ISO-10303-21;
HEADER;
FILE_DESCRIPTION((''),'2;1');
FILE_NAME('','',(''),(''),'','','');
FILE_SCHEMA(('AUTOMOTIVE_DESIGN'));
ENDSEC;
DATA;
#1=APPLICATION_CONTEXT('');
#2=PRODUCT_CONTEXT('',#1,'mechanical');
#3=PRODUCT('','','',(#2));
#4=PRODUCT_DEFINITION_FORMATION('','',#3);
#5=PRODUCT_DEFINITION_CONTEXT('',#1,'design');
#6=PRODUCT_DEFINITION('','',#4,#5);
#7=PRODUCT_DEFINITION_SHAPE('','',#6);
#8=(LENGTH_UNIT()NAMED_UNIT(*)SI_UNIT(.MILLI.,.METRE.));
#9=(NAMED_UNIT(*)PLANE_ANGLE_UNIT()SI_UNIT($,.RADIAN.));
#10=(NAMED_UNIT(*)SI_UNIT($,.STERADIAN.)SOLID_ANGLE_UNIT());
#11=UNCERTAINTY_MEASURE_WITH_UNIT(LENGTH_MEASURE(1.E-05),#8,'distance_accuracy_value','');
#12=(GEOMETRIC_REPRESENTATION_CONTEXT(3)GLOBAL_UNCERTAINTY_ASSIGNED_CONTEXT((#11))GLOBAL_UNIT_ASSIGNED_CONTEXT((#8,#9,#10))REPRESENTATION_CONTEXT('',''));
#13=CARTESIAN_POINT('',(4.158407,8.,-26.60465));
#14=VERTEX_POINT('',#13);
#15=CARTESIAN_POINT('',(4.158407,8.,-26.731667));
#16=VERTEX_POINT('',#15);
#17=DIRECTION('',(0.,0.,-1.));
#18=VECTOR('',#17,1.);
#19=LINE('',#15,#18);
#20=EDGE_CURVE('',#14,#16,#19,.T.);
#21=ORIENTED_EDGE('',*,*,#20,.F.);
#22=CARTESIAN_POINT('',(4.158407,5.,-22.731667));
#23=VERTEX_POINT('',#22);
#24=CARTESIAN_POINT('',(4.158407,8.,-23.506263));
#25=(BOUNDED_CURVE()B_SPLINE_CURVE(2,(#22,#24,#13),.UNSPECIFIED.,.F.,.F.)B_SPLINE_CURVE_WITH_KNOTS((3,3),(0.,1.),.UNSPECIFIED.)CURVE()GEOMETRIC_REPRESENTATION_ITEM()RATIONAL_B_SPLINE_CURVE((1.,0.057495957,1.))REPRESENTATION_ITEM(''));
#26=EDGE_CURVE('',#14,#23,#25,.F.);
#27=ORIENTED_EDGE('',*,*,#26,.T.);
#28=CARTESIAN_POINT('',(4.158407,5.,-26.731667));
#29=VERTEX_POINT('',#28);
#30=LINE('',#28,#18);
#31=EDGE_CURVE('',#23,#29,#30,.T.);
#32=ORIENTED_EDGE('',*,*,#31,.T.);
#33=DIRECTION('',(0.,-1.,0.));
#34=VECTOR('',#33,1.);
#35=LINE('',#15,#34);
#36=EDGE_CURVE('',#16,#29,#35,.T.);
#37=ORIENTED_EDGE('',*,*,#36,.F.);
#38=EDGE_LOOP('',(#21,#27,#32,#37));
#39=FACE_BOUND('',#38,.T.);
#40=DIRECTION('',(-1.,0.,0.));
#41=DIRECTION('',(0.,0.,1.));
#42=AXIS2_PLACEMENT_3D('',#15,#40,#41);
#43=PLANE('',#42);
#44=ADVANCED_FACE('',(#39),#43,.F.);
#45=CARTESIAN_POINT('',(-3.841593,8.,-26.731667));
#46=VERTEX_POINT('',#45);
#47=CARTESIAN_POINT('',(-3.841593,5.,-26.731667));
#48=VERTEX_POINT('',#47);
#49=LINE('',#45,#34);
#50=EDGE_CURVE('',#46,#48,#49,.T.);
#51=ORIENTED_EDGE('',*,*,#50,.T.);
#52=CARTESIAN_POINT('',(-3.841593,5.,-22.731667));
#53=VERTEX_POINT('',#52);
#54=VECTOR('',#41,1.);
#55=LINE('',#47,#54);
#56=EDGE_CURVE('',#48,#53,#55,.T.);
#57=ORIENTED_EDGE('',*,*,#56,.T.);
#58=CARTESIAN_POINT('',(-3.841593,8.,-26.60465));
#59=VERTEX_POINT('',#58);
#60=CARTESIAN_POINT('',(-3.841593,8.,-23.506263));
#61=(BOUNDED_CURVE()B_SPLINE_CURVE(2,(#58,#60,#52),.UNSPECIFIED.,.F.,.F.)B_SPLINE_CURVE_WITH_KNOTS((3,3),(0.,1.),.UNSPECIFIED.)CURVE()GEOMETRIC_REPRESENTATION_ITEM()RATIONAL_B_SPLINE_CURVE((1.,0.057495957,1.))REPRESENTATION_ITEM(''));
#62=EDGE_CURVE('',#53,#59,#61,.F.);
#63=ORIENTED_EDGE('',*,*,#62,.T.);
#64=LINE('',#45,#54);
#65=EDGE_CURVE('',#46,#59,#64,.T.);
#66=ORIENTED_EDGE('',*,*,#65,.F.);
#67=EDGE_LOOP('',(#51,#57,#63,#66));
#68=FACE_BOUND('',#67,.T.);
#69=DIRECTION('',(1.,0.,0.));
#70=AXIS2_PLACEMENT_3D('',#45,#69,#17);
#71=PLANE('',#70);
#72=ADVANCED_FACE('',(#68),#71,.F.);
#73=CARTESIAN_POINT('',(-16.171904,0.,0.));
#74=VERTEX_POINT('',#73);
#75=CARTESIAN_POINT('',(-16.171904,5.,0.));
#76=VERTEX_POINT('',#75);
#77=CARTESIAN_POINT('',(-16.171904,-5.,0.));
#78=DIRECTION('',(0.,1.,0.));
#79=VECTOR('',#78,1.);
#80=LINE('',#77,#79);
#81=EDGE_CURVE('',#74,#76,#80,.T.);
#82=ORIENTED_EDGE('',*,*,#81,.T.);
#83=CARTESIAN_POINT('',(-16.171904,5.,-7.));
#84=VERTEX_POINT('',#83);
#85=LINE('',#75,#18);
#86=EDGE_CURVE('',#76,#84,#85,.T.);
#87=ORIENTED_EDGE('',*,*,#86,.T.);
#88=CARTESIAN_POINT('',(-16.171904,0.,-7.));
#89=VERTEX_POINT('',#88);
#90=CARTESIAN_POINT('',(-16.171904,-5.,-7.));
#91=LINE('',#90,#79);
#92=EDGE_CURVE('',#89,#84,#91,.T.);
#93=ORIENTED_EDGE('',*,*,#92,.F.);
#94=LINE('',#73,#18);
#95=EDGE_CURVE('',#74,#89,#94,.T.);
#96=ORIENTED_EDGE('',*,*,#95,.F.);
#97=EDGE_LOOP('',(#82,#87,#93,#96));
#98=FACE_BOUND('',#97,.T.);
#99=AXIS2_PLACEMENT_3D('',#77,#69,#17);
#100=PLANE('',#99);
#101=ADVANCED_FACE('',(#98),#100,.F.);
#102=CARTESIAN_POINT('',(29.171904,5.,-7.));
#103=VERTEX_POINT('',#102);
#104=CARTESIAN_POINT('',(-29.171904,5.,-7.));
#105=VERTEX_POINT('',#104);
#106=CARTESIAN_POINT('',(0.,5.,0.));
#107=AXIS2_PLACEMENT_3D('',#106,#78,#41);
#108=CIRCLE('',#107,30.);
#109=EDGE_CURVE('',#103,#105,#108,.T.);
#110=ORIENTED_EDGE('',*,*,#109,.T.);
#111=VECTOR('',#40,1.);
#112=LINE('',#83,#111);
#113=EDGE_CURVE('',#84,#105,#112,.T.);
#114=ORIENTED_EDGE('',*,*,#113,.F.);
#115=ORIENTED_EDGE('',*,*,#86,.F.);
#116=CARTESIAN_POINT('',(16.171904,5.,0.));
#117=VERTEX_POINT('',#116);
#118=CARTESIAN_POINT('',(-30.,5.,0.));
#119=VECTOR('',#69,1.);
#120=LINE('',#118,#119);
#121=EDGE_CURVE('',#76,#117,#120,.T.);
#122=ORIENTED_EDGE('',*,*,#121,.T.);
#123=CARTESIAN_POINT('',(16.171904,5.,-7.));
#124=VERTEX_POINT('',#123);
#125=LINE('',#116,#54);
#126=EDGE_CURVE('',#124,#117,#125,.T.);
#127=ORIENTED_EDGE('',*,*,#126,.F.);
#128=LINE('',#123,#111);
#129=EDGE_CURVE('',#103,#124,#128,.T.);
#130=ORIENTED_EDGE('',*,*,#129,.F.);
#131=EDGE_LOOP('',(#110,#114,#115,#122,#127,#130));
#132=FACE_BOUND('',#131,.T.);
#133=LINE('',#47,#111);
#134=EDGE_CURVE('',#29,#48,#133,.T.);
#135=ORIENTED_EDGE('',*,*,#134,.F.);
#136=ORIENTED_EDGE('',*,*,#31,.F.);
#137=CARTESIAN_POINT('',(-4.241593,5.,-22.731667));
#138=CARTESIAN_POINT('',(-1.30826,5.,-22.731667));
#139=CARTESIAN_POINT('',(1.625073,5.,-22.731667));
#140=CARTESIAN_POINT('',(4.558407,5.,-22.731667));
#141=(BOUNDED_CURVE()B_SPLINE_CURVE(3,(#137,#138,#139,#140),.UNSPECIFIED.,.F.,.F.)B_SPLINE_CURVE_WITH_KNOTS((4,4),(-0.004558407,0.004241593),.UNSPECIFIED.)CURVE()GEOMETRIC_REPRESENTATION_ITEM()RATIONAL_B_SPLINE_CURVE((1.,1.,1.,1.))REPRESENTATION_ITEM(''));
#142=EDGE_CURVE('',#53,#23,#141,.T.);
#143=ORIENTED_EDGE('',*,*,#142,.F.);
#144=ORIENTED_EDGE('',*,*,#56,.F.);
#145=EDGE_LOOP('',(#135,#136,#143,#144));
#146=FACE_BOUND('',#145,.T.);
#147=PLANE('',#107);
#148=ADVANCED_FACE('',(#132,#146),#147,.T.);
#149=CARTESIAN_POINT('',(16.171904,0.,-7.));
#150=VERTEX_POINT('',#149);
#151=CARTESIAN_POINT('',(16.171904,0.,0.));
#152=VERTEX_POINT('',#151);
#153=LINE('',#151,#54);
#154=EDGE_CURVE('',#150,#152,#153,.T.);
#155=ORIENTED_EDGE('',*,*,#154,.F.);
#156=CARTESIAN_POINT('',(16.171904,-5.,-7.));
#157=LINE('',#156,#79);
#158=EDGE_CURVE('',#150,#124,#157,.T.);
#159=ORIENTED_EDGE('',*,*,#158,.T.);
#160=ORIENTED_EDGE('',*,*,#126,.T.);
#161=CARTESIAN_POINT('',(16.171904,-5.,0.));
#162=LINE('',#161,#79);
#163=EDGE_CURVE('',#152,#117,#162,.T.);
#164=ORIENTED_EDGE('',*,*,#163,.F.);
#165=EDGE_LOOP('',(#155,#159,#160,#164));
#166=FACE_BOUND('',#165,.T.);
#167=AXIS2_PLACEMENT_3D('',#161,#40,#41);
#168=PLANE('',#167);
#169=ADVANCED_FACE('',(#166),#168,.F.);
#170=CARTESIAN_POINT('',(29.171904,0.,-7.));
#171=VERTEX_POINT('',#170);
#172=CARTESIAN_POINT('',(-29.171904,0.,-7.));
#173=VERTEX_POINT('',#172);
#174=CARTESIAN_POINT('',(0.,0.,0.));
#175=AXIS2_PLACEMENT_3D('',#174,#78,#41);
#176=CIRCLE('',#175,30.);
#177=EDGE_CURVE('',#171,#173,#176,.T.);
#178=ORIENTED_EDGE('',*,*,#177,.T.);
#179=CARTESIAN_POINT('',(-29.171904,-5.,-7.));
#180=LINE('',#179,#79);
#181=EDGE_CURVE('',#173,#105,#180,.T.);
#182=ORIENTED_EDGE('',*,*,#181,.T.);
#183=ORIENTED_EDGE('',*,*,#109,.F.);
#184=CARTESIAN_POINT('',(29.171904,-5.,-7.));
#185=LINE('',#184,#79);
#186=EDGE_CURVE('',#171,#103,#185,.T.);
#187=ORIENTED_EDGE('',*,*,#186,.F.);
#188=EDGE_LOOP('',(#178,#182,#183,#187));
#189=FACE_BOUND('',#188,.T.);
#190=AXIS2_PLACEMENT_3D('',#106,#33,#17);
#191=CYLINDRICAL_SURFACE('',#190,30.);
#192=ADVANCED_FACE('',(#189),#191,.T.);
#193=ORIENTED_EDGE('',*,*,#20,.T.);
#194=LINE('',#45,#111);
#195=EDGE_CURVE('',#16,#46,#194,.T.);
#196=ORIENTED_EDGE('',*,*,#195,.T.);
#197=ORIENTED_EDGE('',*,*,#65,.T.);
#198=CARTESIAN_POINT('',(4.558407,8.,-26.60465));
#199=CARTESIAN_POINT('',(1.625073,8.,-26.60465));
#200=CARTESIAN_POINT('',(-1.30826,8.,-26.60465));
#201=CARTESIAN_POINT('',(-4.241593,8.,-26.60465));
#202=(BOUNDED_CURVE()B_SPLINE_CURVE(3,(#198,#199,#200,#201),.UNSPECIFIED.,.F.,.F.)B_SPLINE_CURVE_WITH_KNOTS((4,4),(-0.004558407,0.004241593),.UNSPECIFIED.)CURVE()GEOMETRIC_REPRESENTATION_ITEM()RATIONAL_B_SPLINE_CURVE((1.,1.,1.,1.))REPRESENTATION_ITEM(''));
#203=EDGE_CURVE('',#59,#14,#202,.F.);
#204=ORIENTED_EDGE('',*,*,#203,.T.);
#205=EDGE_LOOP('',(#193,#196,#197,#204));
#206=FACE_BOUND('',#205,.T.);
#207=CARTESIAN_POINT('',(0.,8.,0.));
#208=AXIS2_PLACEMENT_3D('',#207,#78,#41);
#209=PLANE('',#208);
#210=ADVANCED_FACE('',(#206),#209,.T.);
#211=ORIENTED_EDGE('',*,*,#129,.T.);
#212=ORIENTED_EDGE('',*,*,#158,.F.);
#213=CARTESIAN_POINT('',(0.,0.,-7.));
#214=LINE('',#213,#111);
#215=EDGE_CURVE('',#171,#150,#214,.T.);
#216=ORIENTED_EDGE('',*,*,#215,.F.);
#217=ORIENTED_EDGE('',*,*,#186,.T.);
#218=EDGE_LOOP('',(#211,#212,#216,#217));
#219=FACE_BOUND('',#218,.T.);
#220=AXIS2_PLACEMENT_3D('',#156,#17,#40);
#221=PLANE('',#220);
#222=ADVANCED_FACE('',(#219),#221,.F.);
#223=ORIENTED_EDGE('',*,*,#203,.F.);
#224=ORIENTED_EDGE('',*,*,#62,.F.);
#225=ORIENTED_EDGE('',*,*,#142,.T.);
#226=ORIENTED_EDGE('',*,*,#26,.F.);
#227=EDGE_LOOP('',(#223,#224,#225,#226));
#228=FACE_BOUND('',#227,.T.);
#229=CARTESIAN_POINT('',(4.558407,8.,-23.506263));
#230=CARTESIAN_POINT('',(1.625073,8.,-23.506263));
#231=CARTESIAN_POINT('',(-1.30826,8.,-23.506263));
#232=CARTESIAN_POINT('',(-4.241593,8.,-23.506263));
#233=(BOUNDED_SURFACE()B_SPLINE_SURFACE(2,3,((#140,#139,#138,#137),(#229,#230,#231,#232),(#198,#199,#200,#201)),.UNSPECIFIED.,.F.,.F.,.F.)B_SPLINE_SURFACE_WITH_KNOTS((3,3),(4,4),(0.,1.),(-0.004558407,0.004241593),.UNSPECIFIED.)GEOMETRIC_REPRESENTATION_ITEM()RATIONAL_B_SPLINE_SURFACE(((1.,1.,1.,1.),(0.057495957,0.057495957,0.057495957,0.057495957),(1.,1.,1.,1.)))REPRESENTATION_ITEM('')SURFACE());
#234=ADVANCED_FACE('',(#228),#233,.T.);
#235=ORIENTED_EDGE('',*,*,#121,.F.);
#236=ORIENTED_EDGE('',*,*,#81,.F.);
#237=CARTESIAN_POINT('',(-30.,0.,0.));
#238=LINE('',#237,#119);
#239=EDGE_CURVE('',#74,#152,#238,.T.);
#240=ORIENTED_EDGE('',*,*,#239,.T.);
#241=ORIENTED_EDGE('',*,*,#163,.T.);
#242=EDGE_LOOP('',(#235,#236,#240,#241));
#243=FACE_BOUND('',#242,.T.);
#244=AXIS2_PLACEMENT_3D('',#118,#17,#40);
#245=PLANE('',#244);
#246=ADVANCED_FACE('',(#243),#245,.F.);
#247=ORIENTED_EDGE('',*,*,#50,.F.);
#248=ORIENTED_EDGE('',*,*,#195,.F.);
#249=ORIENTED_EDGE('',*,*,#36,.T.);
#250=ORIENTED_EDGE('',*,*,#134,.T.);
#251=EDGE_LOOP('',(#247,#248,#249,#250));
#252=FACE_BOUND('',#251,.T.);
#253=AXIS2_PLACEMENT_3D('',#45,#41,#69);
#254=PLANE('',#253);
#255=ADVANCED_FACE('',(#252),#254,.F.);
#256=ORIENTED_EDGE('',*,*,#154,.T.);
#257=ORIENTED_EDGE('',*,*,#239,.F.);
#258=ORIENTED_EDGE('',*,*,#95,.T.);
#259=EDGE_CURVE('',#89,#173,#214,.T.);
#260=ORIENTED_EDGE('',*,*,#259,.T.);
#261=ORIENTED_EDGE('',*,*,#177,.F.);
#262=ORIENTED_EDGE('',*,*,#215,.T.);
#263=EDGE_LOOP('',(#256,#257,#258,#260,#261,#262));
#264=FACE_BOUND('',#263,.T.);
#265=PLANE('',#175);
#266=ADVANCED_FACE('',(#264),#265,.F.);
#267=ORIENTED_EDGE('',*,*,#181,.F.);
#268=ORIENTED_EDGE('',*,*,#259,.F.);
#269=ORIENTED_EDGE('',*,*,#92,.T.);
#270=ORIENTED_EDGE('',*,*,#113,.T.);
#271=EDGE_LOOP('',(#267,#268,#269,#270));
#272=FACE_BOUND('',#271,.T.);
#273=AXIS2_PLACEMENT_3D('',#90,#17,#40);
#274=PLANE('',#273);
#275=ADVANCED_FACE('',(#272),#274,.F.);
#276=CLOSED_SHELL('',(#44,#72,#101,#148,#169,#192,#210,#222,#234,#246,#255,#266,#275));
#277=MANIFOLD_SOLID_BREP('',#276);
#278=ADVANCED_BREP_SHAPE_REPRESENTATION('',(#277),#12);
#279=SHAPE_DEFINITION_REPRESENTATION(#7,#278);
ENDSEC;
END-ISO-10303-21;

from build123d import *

# Parameters (mm, degrees)
BOSS_EXTRUDE1_DEPTH = 5
SKETCH3_W           = 8
SKETCH3_H           = 4
BOSS_EXTRUDE2_DEPTH = 3
FILLET1_START       = -3.841593316
FILLET1_DEPTH       = 8
CUT_EXTRUDE1_START  = -10
CUT_EXTRUDE1_DEPTH  = 10


with BuildPart() as part:
    # Sketch1 → Boss-Extrude1 (new body)
    with BuildSketch(Plane(origin=(0, 0, 0), x_dir=(1, 0, 0), z_dir=(0, 1, 0))):
        with BuildLine():
            Line((-30, 0), (30, 0))
            ThreePointArc((30, 0), (0, 30), (-30, 0))
        make_face()
    extrude(amount=BOSS_EXTRUDE1_DEPTH)

    # Sketch3 → Boss-Extrude2 (add)
    with BuildSketch(Plane(origin=(0, 5, 0), x_dir=(1, 0, 0), z_dir=(0, 1, 0))):
        with Locations((0.158406684, 24.731666579)):
            Rectangle(SKETCH3_W, SKETCH3_H)
    extrude(amount=BOSS_EXTRUDE2_DEPTH)

    # Fillet1: read off the stored shape, not the designer's step
    # Fillet1 outline → Fillet1 (cut)
    with BuildSketch(Plane.YZ.offset(FILLET1_START)):
        with BuildLine():
            Line((8, -22.731666579), (5, -22.731666579))
            add(Edge.make_bspline(
                [(5, -22.731666579), (8, -23.506263249), (8, -26.604649926)],
                knots=[0, 0, 0, 1, 1, 1], degree=2, weights=[1, 0.057495957, 1]))
            Line((8, -26.604649926), (8, -22.731666579))
        make_face()
    extrude(amount=FILLET1_DEPTH, mode=Mode.SUBTRACT)

    # Sketch5 → Cut-Extrude1 (cut)
    with BuildSketch(Plane(origin=(0, 5, 0), x_dir=(1, 0, 0), z_dir=(0, 1, 0)).offset(CUT_EXTRUDE1_START)):
        with BuildLine():
            Line((-16.171904292, 0), (-16.171904292, 7))
            Line((-16.171904292, 7), (-29.171904292, 7))
            ThreePointArc((-29.171904292, 7), (-29.792256786, 3.524405712), (-30, 0))
            Line((-30, 0), (-16.171904292, 0))
        make_face()
        with BuildLine():
            Line((16.171904292, 7), (29.171904292, 7))
            ThreePointArc((29.171904292, 7), (29.792256786, 3.524405712), (30, 0))
            Line((30, 0), (16.171904292, 0))
            Line((16.171904292, 0), (16.171904292, 7))
        make_face()
    extrude(amount=CUT_EXTRUDE1_DEPTH, mode=Mode.SUBTRACT)


solid = part.part
